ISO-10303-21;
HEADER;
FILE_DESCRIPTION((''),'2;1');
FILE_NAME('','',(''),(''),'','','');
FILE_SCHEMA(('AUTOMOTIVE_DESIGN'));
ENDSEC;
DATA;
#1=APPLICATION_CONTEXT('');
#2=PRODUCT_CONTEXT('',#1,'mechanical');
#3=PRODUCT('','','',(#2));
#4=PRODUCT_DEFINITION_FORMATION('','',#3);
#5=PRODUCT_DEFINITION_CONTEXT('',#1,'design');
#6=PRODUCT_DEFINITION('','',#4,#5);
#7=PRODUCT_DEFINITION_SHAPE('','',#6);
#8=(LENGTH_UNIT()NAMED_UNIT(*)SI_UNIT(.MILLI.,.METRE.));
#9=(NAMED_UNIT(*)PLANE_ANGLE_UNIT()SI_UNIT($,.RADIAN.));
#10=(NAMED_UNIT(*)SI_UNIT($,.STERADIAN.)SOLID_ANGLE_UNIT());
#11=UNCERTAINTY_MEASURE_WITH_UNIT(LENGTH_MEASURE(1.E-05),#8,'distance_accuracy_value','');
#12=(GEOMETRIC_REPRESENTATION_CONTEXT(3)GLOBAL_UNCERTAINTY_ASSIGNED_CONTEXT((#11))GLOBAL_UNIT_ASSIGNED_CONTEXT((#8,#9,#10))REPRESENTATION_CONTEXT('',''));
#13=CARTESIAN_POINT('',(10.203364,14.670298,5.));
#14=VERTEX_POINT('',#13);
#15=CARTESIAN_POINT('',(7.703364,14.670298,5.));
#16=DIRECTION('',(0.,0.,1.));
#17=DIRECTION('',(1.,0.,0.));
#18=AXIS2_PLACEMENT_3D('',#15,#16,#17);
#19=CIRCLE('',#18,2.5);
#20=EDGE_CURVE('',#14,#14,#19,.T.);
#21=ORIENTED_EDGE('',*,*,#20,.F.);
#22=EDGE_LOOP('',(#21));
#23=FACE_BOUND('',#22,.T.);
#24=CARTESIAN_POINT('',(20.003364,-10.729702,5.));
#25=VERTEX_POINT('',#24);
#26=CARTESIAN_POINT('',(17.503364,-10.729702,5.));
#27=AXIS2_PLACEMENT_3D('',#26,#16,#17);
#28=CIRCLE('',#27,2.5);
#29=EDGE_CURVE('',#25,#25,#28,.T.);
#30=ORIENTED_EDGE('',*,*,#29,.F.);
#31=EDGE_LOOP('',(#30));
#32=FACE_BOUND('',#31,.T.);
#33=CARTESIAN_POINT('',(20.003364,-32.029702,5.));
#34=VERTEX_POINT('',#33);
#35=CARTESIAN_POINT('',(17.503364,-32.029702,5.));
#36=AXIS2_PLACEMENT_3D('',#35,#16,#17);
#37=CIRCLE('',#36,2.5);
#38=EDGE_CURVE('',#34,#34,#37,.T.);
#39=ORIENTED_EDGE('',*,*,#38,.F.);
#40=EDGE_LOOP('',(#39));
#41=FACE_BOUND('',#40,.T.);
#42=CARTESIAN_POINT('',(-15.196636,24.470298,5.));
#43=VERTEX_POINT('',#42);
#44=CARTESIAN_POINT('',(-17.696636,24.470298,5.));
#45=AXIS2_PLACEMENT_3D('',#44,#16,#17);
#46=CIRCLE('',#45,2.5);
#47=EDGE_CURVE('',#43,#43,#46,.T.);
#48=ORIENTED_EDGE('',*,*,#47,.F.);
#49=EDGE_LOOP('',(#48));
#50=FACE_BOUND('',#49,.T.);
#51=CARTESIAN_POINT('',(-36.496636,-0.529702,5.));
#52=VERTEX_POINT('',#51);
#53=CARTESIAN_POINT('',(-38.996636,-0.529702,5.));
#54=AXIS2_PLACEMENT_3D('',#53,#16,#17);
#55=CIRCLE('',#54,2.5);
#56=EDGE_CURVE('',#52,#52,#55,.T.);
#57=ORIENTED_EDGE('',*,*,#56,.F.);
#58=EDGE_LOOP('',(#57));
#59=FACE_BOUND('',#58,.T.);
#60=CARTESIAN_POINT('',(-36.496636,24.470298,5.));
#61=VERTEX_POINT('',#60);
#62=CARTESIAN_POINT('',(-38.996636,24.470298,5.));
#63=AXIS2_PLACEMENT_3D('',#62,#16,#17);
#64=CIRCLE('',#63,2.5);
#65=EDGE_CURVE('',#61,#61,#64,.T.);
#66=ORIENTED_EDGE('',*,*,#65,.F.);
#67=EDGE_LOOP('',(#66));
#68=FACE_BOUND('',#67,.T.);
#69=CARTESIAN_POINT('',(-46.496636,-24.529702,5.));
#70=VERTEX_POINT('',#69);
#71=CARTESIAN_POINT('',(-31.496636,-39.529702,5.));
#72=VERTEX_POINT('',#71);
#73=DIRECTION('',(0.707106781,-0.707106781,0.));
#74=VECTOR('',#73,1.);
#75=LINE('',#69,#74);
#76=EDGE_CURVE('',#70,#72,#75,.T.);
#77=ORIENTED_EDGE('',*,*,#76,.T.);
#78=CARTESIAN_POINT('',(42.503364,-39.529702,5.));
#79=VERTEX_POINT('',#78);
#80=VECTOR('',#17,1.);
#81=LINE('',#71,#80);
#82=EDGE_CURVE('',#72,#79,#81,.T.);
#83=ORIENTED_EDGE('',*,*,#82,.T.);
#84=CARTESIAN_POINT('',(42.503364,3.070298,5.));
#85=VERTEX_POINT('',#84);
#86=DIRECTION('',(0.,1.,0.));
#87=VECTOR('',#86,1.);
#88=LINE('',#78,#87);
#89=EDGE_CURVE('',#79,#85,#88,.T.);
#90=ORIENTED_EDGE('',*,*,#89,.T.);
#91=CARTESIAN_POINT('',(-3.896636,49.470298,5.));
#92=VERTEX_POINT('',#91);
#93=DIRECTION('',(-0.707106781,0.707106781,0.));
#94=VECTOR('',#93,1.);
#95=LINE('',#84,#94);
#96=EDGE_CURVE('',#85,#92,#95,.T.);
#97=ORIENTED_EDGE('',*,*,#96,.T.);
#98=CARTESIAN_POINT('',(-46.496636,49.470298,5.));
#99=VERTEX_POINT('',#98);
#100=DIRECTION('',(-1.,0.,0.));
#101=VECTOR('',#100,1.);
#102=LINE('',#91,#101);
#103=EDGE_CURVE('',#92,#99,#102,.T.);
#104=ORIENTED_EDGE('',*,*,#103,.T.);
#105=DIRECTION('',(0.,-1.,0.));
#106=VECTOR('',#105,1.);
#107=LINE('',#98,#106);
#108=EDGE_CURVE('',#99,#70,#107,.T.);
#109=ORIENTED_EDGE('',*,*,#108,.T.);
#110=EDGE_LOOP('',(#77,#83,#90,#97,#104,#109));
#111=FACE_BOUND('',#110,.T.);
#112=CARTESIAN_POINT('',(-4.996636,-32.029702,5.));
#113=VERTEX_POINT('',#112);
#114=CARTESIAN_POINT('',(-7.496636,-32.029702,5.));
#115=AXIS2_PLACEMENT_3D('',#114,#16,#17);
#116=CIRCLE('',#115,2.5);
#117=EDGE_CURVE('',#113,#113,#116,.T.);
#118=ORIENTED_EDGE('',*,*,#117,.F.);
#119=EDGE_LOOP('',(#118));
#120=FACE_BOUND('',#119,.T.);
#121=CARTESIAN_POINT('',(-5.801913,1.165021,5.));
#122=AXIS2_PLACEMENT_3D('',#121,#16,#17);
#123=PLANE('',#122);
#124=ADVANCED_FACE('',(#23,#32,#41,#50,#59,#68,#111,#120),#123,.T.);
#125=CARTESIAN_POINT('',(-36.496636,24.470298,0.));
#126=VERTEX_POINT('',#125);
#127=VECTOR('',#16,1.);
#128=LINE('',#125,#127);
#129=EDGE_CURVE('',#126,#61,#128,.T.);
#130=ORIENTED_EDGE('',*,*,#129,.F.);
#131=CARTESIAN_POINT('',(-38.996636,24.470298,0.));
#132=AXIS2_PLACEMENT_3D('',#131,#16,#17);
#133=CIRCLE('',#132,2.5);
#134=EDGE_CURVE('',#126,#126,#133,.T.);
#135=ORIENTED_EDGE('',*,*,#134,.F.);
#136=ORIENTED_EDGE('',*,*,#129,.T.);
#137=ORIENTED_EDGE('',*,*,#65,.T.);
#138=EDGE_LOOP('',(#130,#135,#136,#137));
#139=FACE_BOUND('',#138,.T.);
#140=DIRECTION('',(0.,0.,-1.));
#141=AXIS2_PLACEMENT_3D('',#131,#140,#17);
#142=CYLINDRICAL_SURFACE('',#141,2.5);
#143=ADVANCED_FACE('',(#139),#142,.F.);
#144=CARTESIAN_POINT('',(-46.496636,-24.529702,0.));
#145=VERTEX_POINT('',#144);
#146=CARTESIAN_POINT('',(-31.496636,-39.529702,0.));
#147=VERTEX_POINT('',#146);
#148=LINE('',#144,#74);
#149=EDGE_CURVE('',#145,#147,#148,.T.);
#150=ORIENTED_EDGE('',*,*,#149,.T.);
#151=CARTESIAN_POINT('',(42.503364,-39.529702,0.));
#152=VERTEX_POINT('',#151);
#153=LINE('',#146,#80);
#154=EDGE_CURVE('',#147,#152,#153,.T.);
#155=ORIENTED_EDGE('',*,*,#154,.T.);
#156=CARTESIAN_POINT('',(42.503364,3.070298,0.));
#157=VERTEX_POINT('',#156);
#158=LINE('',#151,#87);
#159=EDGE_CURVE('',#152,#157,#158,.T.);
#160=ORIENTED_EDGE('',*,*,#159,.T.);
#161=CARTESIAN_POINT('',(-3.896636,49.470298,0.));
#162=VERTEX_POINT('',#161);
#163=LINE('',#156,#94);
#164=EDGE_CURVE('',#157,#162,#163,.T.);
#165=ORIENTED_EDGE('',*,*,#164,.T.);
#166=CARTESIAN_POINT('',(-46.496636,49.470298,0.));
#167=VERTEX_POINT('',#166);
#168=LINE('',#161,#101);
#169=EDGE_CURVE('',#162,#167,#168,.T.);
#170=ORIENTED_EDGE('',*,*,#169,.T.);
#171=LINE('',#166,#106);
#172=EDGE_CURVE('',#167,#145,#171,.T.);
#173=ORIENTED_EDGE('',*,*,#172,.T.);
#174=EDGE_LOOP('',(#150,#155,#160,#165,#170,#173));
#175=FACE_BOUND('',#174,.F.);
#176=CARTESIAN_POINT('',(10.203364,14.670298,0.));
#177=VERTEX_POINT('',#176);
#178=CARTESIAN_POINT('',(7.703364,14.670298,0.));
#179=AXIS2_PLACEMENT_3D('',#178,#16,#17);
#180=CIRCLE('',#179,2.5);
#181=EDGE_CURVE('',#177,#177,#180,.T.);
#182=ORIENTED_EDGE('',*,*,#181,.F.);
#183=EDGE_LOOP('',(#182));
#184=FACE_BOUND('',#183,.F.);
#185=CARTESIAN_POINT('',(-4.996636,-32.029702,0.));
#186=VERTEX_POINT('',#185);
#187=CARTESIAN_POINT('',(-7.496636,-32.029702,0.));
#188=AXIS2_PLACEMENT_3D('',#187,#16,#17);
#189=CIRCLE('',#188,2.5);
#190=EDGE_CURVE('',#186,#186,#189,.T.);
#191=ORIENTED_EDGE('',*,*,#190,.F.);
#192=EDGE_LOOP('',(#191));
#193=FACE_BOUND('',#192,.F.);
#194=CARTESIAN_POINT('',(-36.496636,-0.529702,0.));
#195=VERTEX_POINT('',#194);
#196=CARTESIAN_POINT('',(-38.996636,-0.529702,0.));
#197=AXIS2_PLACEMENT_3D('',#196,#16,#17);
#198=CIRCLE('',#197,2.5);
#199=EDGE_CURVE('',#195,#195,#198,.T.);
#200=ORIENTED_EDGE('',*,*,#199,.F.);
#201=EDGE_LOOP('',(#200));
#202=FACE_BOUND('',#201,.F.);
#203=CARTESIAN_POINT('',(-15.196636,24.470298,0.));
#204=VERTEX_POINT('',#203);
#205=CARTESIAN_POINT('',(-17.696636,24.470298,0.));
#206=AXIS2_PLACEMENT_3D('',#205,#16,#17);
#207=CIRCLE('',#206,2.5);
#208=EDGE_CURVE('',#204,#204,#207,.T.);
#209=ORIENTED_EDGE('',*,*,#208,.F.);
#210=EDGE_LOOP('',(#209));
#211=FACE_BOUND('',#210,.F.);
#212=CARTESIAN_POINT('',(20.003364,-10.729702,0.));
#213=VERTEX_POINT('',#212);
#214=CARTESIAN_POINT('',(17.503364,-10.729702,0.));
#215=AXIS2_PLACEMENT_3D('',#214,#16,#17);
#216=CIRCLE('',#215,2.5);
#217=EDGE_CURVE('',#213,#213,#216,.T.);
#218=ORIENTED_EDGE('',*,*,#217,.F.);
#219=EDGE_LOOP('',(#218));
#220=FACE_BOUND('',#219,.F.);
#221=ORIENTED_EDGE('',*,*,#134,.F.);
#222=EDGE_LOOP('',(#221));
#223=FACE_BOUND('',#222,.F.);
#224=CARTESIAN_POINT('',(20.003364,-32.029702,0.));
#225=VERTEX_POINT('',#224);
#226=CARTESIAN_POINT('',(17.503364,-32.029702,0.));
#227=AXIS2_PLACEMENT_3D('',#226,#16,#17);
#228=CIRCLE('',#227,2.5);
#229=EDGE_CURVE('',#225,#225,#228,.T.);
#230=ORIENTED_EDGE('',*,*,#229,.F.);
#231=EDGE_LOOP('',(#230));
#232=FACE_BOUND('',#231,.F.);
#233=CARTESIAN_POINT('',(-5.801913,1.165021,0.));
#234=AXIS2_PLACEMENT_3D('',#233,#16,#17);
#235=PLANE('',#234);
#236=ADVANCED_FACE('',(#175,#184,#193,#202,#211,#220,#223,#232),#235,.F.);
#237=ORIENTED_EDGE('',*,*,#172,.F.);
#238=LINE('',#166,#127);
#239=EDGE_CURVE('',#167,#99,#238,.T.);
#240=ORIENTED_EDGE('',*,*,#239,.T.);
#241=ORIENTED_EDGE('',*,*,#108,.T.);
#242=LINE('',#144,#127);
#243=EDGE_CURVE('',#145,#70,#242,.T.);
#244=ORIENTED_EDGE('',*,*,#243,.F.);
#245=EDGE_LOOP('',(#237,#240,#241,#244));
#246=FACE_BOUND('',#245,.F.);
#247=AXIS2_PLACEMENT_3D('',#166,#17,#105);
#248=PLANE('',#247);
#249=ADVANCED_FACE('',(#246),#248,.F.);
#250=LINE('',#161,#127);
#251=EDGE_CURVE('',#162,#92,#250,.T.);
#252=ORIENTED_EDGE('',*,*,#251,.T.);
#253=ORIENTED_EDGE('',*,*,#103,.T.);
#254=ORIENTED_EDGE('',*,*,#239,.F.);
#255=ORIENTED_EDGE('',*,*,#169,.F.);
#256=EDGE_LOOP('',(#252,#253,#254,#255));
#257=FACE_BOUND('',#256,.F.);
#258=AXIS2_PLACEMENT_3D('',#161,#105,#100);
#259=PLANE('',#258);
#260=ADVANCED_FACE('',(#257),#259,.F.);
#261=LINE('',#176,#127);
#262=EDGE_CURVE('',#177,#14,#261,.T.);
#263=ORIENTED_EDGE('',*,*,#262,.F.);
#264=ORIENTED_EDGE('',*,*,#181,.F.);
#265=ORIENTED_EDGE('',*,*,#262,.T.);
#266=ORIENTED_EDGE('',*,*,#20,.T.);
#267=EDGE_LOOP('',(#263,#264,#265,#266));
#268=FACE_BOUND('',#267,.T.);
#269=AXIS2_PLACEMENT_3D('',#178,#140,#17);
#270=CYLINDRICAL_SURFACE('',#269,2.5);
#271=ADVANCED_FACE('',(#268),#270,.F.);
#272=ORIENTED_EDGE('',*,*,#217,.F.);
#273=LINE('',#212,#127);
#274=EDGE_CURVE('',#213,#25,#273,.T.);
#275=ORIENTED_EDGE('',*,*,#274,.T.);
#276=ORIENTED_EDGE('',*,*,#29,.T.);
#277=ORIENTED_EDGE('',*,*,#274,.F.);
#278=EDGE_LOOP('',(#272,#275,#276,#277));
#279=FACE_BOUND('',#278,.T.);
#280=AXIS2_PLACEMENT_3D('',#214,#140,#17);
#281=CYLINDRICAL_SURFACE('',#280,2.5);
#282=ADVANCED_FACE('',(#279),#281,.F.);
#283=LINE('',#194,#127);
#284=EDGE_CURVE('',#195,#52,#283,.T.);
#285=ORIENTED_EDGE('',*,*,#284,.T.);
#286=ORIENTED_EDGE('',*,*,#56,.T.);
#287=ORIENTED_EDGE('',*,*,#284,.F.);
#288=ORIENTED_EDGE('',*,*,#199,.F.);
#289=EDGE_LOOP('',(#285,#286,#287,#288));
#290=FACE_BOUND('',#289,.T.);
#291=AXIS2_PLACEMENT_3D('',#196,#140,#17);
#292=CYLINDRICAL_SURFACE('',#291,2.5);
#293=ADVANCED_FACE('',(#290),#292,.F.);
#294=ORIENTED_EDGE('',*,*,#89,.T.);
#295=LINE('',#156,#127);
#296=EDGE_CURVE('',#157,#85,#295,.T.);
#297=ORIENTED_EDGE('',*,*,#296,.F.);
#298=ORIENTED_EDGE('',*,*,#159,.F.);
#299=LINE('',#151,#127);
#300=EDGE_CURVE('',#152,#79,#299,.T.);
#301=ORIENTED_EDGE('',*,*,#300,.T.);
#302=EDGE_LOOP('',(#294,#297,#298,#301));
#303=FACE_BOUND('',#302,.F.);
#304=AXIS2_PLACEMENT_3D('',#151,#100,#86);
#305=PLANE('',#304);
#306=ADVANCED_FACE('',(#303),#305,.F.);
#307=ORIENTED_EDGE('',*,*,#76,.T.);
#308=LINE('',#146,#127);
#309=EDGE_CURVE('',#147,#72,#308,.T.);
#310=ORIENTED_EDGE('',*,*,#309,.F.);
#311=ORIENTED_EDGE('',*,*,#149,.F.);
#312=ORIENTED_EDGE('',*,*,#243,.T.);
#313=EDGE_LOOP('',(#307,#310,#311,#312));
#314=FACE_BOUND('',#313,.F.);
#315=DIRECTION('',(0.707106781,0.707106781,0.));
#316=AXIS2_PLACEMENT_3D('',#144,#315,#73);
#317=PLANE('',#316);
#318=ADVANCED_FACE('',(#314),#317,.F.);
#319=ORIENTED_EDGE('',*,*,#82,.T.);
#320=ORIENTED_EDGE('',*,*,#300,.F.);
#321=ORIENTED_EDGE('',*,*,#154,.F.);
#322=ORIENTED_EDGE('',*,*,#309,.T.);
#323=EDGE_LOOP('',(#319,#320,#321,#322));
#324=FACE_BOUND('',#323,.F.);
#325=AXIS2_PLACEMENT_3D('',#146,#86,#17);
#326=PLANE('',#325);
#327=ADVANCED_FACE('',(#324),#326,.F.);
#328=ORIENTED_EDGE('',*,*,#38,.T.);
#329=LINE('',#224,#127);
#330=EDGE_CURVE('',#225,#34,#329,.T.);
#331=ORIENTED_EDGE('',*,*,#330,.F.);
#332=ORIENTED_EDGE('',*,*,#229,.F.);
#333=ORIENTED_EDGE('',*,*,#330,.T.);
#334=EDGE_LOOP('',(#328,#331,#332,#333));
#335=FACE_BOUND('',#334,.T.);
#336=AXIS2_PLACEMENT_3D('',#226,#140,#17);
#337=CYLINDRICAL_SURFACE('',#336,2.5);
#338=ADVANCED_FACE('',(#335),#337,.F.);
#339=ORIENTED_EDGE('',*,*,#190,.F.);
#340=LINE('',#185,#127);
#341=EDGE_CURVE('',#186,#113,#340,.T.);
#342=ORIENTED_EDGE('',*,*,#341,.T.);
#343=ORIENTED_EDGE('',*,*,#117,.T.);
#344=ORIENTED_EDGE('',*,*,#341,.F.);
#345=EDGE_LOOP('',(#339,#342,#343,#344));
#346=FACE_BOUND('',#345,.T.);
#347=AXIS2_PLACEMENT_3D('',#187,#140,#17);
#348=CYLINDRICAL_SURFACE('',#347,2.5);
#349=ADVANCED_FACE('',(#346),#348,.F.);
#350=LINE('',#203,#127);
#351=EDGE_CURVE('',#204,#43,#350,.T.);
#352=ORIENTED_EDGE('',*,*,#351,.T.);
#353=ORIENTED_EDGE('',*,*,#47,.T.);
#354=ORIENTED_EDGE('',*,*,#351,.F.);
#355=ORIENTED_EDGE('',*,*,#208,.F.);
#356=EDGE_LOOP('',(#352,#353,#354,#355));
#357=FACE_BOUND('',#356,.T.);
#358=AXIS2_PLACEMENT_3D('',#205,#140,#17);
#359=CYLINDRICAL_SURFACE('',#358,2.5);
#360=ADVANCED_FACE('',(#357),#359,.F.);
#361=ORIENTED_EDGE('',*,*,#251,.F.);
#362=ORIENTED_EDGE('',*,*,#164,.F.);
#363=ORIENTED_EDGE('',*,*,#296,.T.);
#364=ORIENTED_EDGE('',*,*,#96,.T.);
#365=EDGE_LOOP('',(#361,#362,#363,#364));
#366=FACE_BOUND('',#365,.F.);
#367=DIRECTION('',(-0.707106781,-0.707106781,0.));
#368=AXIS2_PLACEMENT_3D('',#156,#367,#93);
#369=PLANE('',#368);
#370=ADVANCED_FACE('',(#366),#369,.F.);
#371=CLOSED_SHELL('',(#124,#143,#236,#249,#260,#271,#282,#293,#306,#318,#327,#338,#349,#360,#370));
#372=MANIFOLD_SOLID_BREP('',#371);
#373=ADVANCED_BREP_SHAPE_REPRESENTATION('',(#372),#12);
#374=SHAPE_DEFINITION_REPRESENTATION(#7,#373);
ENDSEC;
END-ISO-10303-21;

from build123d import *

# Parameters (mm, degrees)
F0_R     = 2.5
F1_DEPTH = 5


# Not quite as in the source:
# - a feature names something its author has since deleted; it is built from what else it names


with BuildPart() as f1:
    # F0 (on Top) → F1 (new body)
    with BuildSketch(Plane.XY):
        Polygon((-46.496636016, -24.5297024497), (-31.496636016, -39.5297024497), (42.503363984, -39.5297024497), (42.503363984, 3.0702975503), (-3.896636016, 49.4702975503), (-46.496636016, 49.4702975503), align=None)
        with Locations((-7.496636016, -32.0297024497)):
            Circle(F0_R, mode=Mode.SUBTRACT)
        with Locations((-38.996636016, -0.5297024497)):
            Circle(F0_R, mode=Mode.SUBTRACT)
        with Locations((17.503363984, -32.0297024497)):
            Circle(F0_R, mode=Mode.SUBTRACT)
        with Locations((17.503363984, -10.7297024497)):
            Circle(F0_R, mode=Mode.SUBTRACT)
        with Locations((-38.996636016, 24.4702975503)):
            Circle(F0_R, mode=Mode.SUBTRACT)
        with Locations((-17.696636016, 24.4702975503)):
            Circle(F0_R, mode=Mode.SUBTRACT)
        with Locations((7.703363984, 14.6702975503)):
            Circle(F0_R, mode=Mode.SUBTRACT)
    extrude(amount=F1_DEPTH)


solid = f1.part
